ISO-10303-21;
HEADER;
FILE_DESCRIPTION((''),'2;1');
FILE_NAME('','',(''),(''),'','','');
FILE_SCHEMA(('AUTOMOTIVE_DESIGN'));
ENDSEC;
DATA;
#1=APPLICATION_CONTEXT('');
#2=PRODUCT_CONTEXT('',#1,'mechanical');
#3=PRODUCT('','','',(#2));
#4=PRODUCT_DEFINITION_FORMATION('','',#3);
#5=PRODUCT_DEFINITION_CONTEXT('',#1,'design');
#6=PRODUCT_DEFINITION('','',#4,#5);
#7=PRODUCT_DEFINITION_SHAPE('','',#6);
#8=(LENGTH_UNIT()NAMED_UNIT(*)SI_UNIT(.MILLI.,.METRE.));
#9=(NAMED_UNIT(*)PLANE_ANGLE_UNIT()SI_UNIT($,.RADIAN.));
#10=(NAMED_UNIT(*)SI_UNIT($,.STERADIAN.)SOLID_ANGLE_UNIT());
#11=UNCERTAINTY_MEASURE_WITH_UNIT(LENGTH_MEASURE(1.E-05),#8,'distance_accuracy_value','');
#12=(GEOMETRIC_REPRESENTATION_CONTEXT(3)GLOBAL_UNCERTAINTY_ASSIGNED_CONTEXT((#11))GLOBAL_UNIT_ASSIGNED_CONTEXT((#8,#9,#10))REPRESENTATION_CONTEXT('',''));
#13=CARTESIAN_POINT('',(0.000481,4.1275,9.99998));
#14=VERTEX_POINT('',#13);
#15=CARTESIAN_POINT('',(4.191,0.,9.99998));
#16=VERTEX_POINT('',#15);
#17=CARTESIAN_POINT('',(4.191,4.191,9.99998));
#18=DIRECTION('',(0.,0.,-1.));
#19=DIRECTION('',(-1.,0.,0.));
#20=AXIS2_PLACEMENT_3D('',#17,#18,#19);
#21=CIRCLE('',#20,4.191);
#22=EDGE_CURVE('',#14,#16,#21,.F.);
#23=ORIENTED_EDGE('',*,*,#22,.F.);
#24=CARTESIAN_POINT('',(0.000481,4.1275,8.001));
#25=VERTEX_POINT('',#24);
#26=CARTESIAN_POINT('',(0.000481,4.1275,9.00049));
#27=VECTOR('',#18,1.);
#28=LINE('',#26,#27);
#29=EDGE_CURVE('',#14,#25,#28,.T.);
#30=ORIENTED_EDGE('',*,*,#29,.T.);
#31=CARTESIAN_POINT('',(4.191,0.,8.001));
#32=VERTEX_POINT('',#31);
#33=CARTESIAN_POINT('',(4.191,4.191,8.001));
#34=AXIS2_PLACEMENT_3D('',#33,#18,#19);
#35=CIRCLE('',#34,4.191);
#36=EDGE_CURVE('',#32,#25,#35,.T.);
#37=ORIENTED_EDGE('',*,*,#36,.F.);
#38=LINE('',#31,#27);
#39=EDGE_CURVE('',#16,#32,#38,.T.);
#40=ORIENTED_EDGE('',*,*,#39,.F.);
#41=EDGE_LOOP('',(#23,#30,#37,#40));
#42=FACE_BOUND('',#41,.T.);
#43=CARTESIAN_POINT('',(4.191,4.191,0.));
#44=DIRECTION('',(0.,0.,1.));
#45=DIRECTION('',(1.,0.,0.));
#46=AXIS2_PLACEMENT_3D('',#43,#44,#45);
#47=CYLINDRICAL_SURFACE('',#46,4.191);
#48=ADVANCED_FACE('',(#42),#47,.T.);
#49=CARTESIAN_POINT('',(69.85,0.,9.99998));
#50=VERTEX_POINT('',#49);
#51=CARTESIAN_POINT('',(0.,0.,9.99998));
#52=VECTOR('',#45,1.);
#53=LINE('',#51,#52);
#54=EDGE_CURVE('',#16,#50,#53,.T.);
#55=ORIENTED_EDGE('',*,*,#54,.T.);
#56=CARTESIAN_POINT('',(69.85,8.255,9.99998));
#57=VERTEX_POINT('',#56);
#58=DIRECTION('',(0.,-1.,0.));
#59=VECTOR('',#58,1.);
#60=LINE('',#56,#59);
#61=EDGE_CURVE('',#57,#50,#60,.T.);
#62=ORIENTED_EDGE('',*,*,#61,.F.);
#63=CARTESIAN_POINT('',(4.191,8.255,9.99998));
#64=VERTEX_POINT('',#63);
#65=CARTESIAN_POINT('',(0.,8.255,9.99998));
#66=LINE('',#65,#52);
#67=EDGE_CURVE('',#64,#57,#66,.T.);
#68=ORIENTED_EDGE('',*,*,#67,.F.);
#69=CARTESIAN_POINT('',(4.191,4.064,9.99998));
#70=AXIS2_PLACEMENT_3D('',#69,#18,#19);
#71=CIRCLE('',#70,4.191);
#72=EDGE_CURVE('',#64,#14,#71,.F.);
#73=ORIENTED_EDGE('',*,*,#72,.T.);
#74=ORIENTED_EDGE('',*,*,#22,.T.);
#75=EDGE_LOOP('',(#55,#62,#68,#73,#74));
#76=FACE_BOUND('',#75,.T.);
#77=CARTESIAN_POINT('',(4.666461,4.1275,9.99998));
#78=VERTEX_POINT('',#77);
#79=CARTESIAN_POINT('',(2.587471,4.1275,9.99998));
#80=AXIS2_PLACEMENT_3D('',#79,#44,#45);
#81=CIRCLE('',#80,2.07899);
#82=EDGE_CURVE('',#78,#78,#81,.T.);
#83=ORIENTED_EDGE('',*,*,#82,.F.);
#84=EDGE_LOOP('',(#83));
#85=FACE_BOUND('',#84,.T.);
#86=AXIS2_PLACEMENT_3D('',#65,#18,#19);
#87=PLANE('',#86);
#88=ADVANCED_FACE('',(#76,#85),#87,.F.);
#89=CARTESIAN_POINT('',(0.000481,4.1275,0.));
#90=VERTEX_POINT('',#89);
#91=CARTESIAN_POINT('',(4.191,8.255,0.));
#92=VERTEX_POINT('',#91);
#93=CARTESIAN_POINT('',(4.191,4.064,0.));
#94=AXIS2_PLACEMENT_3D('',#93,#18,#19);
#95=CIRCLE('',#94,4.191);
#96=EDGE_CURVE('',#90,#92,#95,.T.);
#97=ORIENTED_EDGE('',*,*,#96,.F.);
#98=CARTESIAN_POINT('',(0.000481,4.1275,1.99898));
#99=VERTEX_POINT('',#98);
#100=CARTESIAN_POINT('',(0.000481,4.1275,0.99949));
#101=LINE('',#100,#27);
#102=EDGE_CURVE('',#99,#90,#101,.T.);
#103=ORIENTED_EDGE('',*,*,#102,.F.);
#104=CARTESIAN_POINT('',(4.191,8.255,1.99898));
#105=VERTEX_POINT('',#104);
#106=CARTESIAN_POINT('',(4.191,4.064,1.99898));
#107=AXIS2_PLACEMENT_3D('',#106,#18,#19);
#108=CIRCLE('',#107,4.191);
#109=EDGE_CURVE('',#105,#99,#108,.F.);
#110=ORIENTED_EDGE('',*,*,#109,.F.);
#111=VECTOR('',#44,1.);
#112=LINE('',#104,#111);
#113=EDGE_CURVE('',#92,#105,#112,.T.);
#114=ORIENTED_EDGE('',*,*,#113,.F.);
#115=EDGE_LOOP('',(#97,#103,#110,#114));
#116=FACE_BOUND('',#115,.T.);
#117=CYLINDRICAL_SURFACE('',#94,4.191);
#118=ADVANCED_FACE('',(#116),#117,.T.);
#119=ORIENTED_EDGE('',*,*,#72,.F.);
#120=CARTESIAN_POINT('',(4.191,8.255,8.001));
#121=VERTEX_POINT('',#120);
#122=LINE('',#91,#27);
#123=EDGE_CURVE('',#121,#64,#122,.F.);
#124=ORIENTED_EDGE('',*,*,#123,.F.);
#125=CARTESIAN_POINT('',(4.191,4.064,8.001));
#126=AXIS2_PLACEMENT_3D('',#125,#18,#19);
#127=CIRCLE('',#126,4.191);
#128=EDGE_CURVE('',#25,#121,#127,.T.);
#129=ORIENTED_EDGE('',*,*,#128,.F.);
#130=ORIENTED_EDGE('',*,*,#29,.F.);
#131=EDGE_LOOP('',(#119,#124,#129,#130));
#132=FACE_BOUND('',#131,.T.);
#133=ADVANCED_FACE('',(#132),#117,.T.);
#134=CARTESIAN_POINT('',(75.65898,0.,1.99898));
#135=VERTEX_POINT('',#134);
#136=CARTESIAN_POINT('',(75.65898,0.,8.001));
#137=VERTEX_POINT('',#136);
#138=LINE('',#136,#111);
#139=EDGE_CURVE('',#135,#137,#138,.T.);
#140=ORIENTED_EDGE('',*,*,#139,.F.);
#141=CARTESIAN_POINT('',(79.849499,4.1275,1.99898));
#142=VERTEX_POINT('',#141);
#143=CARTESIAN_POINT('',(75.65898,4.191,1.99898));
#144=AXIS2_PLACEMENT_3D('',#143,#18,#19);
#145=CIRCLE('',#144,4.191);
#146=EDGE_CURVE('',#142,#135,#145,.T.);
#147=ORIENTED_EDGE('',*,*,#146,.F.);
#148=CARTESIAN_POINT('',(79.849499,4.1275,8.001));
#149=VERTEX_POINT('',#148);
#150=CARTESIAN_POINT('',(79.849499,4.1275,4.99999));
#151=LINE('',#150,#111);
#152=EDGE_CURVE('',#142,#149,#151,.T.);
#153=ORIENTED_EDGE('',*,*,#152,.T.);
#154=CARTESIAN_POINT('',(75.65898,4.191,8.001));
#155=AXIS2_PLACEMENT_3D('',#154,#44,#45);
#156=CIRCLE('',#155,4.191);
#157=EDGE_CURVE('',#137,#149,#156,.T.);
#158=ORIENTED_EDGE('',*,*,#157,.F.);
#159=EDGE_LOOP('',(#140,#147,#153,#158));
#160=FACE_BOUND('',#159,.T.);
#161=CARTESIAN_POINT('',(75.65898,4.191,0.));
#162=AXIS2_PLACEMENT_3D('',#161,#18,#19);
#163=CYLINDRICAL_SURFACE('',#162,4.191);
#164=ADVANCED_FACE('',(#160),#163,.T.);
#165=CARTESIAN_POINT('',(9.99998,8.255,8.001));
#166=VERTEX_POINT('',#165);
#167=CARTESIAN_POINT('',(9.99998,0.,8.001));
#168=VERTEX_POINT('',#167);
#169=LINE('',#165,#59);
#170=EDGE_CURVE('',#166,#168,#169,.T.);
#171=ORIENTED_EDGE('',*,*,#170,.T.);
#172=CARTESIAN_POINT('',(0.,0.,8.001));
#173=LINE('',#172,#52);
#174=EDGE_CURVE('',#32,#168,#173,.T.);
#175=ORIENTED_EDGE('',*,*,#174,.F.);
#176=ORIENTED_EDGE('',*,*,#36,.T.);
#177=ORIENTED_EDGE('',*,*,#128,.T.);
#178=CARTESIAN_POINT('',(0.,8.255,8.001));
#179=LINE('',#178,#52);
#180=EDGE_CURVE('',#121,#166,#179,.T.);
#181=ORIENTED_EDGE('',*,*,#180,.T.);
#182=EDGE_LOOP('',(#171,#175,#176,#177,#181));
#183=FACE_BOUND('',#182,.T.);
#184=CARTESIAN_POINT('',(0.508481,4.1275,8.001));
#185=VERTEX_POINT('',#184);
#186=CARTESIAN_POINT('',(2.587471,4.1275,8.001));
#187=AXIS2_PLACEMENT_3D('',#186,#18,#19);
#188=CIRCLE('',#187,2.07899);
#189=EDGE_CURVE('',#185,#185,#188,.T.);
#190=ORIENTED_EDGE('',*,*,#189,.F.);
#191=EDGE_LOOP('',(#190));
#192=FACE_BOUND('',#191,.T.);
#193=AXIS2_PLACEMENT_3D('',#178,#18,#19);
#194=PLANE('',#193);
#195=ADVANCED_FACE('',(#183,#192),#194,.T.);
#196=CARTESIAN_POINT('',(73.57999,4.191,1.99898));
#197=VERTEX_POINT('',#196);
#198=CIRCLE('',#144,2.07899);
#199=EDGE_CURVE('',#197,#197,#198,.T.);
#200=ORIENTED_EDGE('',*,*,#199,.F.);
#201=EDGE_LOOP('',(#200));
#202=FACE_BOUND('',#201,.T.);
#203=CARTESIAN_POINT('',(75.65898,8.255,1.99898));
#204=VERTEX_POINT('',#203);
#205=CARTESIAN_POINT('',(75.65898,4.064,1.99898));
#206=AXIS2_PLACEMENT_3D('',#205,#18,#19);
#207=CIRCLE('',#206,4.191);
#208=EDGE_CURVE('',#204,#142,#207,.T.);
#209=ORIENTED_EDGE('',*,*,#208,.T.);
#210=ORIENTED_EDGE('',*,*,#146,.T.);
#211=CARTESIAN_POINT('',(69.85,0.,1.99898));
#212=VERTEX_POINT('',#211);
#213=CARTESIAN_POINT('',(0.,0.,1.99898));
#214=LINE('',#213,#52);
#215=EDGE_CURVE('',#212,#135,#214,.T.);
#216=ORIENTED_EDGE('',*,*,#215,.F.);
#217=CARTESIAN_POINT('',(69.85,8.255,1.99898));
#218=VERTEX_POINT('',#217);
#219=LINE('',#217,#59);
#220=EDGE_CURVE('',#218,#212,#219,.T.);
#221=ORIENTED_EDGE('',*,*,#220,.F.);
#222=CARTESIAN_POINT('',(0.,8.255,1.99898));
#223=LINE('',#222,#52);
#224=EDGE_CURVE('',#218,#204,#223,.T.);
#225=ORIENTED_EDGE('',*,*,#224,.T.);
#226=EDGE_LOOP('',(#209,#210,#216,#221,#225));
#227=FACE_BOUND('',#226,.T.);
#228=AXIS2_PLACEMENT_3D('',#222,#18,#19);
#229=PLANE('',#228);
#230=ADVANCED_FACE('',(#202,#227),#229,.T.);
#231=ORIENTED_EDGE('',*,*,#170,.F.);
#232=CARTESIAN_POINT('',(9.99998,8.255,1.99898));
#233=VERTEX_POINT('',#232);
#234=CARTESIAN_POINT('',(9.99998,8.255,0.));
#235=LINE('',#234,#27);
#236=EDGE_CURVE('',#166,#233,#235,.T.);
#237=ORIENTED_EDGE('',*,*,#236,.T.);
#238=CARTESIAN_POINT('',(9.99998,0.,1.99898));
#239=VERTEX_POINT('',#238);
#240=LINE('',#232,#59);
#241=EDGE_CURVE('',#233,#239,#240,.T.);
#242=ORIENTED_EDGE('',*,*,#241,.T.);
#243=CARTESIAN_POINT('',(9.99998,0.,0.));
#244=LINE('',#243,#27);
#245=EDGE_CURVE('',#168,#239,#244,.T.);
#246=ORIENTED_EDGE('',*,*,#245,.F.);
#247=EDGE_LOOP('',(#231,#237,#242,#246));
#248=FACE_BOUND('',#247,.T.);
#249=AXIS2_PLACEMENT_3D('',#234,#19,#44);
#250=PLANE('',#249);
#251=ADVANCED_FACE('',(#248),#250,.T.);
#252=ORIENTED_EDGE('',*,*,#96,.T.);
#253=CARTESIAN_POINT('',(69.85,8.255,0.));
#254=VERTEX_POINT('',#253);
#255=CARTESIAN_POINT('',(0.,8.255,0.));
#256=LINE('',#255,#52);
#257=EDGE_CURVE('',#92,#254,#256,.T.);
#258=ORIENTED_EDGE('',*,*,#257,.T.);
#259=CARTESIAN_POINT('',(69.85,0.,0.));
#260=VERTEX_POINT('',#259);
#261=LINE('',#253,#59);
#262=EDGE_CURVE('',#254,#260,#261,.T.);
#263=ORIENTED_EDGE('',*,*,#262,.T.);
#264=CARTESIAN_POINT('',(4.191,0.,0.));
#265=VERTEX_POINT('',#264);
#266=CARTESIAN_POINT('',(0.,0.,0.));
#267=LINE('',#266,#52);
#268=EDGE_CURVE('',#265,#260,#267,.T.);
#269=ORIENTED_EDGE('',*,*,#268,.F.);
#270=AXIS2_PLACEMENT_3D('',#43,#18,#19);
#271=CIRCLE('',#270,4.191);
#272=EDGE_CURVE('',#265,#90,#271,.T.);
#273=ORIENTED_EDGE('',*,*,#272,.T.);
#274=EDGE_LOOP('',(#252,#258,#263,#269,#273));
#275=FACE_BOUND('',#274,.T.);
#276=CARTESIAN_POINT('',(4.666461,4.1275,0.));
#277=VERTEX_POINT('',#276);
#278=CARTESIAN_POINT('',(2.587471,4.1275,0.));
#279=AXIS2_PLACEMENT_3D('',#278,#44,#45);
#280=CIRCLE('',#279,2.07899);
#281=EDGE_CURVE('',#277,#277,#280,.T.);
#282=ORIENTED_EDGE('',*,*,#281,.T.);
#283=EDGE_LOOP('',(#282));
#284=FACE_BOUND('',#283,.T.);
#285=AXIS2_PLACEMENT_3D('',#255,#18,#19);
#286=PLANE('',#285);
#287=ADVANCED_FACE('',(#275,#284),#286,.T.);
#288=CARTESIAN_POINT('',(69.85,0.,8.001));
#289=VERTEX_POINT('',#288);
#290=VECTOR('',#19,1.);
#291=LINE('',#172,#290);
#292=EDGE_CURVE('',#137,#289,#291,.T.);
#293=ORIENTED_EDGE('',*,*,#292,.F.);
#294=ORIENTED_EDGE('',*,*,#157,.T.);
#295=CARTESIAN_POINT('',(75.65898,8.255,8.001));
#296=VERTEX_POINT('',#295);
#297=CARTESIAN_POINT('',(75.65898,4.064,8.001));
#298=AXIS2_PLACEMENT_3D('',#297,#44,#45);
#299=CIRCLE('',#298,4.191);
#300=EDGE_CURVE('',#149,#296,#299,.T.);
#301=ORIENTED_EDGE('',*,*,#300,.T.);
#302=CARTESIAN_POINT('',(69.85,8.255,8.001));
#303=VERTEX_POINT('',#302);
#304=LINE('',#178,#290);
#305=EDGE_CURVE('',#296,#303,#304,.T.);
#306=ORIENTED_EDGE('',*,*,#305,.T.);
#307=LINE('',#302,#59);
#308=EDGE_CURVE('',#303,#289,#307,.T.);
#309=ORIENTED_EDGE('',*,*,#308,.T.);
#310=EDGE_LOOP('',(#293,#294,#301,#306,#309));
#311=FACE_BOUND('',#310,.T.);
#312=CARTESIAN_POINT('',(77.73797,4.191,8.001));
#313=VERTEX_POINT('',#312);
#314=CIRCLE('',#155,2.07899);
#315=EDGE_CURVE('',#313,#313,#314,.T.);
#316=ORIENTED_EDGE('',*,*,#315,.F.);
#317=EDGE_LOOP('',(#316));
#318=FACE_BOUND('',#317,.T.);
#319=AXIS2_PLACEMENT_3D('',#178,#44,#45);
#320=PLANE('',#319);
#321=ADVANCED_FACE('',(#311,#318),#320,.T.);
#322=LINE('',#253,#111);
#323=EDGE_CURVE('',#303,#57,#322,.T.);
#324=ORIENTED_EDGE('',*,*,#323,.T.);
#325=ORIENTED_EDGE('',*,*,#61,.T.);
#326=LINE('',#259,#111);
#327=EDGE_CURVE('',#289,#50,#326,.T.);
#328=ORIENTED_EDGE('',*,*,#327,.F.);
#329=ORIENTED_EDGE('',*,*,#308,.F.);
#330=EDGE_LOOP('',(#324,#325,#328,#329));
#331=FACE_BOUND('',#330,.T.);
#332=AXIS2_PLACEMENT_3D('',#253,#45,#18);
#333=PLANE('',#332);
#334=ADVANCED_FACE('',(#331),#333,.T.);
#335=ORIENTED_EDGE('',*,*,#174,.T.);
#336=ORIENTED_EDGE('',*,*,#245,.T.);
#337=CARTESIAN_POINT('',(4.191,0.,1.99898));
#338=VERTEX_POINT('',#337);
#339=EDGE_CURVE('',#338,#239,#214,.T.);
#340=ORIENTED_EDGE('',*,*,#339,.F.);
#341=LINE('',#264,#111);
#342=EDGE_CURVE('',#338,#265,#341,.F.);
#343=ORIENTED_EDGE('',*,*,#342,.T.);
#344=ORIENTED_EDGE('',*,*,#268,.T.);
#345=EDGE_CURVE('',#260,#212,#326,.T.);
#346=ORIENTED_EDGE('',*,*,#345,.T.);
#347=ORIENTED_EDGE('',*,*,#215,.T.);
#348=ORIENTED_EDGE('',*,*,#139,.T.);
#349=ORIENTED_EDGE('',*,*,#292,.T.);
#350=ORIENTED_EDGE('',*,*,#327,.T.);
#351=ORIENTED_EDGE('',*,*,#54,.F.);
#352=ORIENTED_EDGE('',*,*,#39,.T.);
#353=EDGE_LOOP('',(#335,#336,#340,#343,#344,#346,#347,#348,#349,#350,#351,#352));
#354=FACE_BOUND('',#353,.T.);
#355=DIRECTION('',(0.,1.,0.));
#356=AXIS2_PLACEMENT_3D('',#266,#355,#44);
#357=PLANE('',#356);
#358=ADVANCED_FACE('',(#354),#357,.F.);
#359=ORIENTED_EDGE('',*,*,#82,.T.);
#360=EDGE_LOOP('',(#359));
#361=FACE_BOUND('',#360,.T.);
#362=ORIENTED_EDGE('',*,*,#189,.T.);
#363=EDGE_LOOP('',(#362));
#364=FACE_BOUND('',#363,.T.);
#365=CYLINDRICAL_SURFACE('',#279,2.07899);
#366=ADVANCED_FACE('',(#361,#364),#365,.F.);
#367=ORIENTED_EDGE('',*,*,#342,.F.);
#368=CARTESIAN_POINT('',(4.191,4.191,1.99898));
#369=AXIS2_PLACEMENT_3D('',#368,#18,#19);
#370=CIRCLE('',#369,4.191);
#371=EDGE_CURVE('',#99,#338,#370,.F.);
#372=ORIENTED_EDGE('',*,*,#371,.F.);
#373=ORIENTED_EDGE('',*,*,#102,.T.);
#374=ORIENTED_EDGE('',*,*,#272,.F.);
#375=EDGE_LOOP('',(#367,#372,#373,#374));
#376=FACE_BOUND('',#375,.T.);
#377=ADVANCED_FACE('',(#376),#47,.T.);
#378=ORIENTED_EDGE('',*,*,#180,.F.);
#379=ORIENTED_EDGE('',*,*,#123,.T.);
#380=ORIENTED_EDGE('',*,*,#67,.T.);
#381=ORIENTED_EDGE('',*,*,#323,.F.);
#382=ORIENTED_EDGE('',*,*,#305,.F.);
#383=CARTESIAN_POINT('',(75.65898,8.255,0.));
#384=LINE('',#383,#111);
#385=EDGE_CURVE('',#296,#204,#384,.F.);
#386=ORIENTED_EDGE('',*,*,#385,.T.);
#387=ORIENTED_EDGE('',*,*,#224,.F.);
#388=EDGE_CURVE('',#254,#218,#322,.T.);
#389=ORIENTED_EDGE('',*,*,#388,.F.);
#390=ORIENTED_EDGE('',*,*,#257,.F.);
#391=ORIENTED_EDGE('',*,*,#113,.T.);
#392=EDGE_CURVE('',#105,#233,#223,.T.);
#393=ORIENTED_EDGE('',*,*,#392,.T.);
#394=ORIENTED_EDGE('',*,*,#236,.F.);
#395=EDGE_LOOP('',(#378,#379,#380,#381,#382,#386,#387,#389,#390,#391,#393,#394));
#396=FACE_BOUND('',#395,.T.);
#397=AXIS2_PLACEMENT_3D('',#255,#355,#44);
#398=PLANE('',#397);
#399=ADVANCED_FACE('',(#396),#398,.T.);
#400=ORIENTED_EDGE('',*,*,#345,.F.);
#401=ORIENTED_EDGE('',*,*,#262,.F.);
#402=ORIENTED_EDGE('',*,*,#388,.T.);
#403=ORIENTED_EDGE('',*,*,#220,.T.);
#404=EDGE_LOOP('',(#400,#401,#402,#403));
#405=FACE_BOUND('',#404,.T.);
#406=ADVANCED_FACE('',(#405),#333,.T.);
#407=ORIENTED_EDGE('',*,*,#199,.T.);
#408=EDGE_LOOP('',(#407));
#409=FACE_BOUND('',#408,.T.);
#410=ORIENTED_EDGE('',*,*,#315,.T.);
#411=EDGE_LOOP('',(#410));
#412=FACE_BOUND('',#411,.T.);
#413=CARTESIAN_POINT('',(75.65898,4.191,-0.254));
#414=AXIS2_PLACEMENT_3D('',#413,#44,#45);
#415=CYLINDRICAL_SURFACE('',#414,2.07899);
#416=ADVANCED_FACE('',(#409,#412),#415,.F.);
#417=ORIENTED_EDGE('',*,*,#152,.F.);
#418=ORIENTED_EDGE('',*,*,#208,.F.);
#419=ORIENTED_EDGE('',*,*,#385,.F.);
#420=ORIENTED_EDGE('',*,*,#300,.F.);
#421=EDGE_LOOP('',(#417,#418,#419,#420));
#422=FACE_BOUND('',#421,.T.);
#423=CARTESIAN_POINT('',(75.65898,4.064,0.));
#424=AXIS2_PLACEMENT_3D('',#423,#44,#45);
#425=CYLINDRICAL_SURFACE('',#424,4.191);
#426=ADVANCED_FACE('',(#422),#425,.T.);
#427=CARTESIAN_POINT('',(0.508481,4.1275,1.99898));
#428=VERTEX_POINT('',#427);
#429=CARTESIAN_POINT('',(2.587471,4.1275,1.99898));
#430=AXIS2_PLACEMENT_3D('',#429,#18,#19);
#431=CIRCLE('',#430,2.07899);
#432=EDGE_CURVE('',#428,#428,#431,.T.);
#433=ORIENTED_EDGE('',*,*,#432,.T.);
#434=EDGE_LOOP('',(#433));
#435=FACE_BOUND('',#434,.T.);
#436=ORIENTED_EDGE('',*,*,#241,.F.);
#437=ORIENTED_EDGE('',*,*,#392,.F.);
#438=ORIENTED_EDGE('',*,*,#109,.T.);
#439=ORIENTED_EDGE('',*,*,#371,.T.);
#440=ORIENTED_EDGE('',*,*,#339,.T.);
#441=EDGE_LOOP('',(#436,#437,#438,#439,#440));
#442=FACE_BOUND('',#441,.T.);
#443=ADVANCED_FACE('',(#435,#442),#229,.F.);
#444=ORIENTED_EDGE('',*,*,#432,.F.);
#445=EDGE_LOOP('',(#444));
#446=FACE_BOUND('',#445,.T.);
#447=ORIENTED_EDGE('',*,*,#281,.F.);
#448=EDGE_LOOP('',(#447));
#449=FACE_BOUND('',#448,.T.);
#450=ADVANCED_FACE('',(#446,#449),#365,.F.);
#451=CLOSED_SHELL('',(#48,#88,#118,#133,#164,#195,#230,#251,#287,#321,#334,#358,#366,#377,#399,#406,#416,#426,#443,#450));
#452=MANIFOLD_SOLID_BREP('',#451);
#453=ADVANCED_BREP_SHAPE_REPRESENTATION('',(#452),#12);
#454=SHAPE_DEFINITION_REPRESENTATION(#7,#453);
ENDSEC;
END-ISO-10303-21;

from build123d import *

# Parameters (mm, degrees)
BOSS_EXTRUDE1_DEPTH = 8.255
FILLET1_R           = 4.191
SKETCH2_R           = 2.07899
CUT_EXTRUDE1_DEPTH  = 81.896006892
FILLET2_R           = 4.191
SKETCH3_R           = 2.07899
CUT_EXTRUDE2_DEPTH  = 8.255


with BuildPart() as part:
    # Sketch1 → Boss-Extrude1 (new body)
    with BuildSketch(Plane(origin=(0, 0, 0), x_dir=(1, 0, 0), z_dir=(0, 1, 0))):
        Polygon((69.85, -8.001), (69.85, -9.99998), (0, -9.99998), (0, -8.001), (9.99998, -8.001), (9.99998, -1.99898), (0, -1.99898), (0, 0), (69.85, 0), (69.85, -1.99898), (79.84998, -1.99898), (79.84998, -8.001), align=None)
    extrude(amount=BOSS_EXTRUDE1_DEPTH)

    # Fillet1
    # the kernel refuses this fillet: 4.191 mm, written as the material it takes off along each edge
    with BuildSketch(Plane(origin=(0, 0, 12.47648), x_dir=(0, 1, 0), z_dir=(0, 0, -1)), Plane(origin=(0, 0, 20.47748), x_dir=(0, 1, 0), z_dir=(0, 0, -1))) as fillet1_piece_1:
        with BuildLine():
            CenterArc((FILLET1_R, FILLET1_R), FILLET1_R, 180, 90)
            Line((0, FILLET1_R), (0, 0))
            Line((0, 0), (FILLET1_R, 0))
        make_face()
    extrude(amount=22.95398, mode=Mode.SUBTRACT)
    with BuildSketch(Plane(origin=(0, 8.255, 12.47648), x_dir=(0, -1, 0), z_dir=(0, 0, -1)), Plane(origin=(0, 8.255, 20.47748), x_dir=(0, -1, 0), z_dir=(0, 0, -1))) as fillet1_piece_2:
        with BuildLine():
            CenterArc((FILLET1_R, -FILLET1_R), FILLET1_R, 90, 90)
            Line((0, -FILLET1_R), (0, 0))
            Line((0, 0), (FILLET1_R, 0))
        make_face()
    extrude(amount=22.95398, mode=Mode.SUBTRACT)

    # Sketch2 → Cut-Extrude1 (cut, through all)
    with BuildSketch(Plane.XY.offset(9.99998)):
        with Locations((2.587471088, 4.1275)):
            Circle(SKETCH2_R)
    extrude(amount=-CUT_EXTRUDE1_DEPTH, mode=Mode.SUBTRACT)

    # Fillet2
    # the kernel refuses this fillet: 4.191 mm, written as the material it takes off along each edge
    with BuildSketch(Plane(origin=(79.84998, 0, -8.47852), x_dir=(-1, 0, 0), z_dir=(0, 0, 1))) as fillet2_piece_1:
        with BuildLine():
            CenterArc((FILLET2_R, -FILLET2_R), FILLET2_R, 90, 90)
            Line((0, -FILLET2_R), (0, 0))
            Line((0, 0), (FILLET2_R, 0))
        make_face()
    extrude(amount=26.95702, mode=Mode.SUBTRACT)
    with BuildSketch(Plane(origin=(79.84998, 8.255, -8.47852), x_dir=(-1, 0, 0), z_dir=(0, 0, 1))) as fillet2_piece_2:
        with BuildLine():
            CenterArc((FILLET2_R, FILLET2_R), FILLET2_R, 180, 90)
            Line((0, FILLET2_R), (0, 0))
            Line((0, 0), (FILLET2_R, 0))
        make_face()
    extrude(amount=26.95702, mode=Mode.SUBTRACT)

    # Sketch3 → Cut-Extrude2 (cut)
    with BuildSketch(Plane.XY.offset(8.001)):
        with Locations((75.65898, 4.191)):
            Circle(SKETCH3_R)
    extrude(amount=-CUT_EXTRUDE2_DEPTH, mode=Mode.SUBTRACT)


solid = part.part
